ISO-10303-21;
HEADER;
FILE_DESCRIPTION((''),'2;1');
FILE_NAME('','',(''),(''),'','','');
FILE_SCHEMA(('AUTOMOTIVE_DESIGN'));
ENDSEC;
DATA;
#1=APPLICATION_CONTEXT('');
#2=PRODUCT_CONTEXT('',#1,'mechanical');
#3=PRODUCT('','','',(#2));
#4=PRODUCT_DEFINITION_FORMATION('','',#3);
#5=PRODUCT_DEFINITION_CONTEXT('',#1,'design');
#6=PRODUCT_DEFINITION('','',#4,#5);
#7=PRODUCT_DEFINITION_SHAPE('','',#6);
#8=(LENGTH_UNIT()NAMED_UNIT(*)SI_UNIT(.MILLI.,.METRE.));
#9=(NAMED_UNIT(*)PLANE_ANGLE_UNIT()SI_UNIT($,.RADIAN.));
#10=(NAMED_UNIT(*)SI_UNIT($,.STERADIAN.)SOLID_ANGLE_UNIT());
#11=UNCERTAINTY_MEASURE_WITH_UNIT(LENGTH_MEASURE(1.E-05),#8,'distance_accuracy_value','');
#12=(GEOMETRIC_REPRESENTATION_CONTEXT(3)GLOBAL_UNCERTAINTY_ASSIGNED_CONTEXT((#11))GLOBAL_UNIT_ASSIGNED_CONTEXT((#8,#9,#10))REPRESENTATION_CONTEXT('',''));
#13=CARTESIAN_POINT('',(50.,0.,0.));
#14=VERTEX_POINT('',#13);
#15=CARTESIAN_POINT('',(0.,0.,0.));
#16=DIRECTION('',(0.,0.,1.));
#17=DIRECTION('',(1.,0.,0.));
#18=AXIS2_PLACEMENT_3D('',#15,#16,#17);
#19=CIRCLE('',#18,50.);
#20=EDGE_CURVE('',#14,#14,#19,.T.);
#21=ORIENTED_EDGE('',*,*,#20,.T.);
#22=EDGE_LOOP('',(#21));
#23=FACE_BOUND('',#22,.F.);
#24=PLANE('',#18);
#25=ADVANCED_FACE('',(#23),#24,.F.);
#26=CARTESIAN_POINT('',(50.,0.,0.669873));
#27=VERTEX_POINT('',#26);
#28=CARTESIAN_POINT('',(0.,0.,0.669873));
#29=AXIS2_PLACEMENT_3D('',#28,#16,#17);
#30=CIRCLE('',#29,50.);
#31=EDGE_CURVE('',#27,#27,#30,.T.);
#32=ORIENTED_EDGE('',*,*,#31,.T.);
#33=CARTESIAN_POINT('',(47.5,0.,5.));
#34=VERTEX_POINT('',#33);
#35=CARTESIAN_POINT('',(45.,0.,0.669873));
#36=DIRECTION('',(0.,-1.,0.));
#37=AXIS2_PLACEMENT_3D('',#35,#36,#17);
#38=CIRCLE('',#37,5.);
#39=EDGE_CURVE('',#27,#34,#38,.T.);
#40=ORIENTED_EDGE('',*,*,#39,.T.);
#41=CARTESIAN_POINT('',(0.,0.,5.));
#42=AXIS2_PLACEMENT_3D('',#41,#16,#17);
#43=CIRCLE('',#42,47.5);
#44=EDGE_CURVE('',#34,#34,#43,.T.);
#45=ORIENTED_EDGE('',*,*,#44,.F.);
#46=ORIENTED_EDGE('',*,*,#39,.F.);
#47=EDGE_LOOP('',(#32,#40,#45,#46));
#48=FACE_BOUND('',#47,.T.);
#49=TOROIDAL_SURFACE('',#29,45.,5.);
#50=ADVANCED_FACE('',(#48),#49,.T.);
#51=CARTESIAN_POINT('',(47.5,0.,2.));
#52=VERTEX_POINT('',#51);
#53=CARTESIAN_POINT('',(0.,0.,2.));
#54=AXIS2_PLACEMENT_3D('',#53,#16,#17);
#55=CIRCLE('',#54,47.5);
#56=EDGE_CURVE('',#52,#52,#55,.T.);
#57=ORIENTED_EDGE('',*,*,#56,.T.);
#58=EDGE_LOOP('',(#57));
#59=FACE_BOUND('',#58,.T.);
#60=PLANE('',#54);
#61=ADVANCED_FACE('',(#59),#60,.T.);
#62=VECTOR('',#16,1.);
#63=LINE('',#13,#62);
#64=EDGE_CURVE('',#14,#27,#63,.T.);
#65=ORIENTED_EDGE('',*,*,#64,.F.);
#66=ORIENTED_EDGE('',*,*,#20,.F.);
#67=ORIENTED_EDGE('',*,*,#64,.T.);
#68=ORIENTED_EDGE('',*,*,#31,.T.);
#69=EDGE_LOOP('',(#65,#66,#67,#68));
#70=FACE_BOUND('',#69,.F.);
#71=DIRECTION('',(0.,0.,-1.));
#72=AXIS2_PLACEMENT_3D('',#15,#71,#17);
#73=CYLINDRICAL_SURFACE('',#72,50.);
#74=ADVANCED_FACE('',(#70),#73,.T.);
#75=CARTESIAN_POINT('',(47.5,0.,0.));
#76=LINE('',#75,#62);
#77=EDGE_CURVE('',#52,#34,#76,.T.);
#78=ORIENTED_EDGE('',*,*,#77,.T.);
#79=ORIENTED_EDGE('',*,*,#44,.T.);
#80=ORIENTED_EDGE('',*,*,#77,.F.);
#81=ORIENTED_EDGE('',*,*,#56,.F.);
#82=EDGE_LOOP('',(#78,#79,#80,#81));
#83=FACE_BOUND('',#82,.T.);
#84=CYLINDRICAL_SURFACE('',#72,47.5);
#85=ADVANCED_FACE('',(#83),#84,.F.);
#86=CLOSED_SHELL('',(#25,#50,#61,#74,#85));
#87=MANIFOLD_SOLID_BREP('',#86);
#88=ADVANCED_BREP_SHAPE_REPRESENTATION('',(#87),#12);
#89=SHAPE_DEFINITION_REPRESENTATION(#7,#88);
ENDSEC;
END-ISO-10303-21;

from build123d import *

# Parameters (mm, degrees)
F0_R     = 50
F0_R_2   = 47.5
F1_DEPTH = 5
F3_DEPTH = 2


# Not quite as in the source:
# - a fillet or chamfer that OpenCascade refuses, or shapes differently, is made with other operations: its cross-section is extruded or revolved along the edge and cut away or added


with BuildPart() as f1:
    # F0 (on Top) → F1 (new body)
    with BuildSketch(Plane.XY):
        Circle(F0_R)
        Circle(F0_R_2, mode=Mode.SUBTRACT)
    extrude(amount=F1_DEPTH)

    # F2: fillet of radius 5 on 1 edges, made by hand

    # F2_s1 → F2_t2 (revolve, cut)
    with BuildSketch(Plane.XZ):
        with BuildLine():
            ThreePointArc((50, 0.6698729811), (49.3301270189, 3.1698729811), (47.5, 5))
            Line((47.5, 5), (50, 5))
            Line((50, 5), (50, 0.6698729811))
        make_face()
    revolve(axis=Axis((0, 0, 5), (0, 0, 1)), mode=Mode.SUBTRACT)

    # F0 (on Top) → F3 (join)
    with BuildSketch(Plane.XY):
        Circle(F0_R_2)
    extrude(amount=F3_DEPTH)


solid = f1.part
